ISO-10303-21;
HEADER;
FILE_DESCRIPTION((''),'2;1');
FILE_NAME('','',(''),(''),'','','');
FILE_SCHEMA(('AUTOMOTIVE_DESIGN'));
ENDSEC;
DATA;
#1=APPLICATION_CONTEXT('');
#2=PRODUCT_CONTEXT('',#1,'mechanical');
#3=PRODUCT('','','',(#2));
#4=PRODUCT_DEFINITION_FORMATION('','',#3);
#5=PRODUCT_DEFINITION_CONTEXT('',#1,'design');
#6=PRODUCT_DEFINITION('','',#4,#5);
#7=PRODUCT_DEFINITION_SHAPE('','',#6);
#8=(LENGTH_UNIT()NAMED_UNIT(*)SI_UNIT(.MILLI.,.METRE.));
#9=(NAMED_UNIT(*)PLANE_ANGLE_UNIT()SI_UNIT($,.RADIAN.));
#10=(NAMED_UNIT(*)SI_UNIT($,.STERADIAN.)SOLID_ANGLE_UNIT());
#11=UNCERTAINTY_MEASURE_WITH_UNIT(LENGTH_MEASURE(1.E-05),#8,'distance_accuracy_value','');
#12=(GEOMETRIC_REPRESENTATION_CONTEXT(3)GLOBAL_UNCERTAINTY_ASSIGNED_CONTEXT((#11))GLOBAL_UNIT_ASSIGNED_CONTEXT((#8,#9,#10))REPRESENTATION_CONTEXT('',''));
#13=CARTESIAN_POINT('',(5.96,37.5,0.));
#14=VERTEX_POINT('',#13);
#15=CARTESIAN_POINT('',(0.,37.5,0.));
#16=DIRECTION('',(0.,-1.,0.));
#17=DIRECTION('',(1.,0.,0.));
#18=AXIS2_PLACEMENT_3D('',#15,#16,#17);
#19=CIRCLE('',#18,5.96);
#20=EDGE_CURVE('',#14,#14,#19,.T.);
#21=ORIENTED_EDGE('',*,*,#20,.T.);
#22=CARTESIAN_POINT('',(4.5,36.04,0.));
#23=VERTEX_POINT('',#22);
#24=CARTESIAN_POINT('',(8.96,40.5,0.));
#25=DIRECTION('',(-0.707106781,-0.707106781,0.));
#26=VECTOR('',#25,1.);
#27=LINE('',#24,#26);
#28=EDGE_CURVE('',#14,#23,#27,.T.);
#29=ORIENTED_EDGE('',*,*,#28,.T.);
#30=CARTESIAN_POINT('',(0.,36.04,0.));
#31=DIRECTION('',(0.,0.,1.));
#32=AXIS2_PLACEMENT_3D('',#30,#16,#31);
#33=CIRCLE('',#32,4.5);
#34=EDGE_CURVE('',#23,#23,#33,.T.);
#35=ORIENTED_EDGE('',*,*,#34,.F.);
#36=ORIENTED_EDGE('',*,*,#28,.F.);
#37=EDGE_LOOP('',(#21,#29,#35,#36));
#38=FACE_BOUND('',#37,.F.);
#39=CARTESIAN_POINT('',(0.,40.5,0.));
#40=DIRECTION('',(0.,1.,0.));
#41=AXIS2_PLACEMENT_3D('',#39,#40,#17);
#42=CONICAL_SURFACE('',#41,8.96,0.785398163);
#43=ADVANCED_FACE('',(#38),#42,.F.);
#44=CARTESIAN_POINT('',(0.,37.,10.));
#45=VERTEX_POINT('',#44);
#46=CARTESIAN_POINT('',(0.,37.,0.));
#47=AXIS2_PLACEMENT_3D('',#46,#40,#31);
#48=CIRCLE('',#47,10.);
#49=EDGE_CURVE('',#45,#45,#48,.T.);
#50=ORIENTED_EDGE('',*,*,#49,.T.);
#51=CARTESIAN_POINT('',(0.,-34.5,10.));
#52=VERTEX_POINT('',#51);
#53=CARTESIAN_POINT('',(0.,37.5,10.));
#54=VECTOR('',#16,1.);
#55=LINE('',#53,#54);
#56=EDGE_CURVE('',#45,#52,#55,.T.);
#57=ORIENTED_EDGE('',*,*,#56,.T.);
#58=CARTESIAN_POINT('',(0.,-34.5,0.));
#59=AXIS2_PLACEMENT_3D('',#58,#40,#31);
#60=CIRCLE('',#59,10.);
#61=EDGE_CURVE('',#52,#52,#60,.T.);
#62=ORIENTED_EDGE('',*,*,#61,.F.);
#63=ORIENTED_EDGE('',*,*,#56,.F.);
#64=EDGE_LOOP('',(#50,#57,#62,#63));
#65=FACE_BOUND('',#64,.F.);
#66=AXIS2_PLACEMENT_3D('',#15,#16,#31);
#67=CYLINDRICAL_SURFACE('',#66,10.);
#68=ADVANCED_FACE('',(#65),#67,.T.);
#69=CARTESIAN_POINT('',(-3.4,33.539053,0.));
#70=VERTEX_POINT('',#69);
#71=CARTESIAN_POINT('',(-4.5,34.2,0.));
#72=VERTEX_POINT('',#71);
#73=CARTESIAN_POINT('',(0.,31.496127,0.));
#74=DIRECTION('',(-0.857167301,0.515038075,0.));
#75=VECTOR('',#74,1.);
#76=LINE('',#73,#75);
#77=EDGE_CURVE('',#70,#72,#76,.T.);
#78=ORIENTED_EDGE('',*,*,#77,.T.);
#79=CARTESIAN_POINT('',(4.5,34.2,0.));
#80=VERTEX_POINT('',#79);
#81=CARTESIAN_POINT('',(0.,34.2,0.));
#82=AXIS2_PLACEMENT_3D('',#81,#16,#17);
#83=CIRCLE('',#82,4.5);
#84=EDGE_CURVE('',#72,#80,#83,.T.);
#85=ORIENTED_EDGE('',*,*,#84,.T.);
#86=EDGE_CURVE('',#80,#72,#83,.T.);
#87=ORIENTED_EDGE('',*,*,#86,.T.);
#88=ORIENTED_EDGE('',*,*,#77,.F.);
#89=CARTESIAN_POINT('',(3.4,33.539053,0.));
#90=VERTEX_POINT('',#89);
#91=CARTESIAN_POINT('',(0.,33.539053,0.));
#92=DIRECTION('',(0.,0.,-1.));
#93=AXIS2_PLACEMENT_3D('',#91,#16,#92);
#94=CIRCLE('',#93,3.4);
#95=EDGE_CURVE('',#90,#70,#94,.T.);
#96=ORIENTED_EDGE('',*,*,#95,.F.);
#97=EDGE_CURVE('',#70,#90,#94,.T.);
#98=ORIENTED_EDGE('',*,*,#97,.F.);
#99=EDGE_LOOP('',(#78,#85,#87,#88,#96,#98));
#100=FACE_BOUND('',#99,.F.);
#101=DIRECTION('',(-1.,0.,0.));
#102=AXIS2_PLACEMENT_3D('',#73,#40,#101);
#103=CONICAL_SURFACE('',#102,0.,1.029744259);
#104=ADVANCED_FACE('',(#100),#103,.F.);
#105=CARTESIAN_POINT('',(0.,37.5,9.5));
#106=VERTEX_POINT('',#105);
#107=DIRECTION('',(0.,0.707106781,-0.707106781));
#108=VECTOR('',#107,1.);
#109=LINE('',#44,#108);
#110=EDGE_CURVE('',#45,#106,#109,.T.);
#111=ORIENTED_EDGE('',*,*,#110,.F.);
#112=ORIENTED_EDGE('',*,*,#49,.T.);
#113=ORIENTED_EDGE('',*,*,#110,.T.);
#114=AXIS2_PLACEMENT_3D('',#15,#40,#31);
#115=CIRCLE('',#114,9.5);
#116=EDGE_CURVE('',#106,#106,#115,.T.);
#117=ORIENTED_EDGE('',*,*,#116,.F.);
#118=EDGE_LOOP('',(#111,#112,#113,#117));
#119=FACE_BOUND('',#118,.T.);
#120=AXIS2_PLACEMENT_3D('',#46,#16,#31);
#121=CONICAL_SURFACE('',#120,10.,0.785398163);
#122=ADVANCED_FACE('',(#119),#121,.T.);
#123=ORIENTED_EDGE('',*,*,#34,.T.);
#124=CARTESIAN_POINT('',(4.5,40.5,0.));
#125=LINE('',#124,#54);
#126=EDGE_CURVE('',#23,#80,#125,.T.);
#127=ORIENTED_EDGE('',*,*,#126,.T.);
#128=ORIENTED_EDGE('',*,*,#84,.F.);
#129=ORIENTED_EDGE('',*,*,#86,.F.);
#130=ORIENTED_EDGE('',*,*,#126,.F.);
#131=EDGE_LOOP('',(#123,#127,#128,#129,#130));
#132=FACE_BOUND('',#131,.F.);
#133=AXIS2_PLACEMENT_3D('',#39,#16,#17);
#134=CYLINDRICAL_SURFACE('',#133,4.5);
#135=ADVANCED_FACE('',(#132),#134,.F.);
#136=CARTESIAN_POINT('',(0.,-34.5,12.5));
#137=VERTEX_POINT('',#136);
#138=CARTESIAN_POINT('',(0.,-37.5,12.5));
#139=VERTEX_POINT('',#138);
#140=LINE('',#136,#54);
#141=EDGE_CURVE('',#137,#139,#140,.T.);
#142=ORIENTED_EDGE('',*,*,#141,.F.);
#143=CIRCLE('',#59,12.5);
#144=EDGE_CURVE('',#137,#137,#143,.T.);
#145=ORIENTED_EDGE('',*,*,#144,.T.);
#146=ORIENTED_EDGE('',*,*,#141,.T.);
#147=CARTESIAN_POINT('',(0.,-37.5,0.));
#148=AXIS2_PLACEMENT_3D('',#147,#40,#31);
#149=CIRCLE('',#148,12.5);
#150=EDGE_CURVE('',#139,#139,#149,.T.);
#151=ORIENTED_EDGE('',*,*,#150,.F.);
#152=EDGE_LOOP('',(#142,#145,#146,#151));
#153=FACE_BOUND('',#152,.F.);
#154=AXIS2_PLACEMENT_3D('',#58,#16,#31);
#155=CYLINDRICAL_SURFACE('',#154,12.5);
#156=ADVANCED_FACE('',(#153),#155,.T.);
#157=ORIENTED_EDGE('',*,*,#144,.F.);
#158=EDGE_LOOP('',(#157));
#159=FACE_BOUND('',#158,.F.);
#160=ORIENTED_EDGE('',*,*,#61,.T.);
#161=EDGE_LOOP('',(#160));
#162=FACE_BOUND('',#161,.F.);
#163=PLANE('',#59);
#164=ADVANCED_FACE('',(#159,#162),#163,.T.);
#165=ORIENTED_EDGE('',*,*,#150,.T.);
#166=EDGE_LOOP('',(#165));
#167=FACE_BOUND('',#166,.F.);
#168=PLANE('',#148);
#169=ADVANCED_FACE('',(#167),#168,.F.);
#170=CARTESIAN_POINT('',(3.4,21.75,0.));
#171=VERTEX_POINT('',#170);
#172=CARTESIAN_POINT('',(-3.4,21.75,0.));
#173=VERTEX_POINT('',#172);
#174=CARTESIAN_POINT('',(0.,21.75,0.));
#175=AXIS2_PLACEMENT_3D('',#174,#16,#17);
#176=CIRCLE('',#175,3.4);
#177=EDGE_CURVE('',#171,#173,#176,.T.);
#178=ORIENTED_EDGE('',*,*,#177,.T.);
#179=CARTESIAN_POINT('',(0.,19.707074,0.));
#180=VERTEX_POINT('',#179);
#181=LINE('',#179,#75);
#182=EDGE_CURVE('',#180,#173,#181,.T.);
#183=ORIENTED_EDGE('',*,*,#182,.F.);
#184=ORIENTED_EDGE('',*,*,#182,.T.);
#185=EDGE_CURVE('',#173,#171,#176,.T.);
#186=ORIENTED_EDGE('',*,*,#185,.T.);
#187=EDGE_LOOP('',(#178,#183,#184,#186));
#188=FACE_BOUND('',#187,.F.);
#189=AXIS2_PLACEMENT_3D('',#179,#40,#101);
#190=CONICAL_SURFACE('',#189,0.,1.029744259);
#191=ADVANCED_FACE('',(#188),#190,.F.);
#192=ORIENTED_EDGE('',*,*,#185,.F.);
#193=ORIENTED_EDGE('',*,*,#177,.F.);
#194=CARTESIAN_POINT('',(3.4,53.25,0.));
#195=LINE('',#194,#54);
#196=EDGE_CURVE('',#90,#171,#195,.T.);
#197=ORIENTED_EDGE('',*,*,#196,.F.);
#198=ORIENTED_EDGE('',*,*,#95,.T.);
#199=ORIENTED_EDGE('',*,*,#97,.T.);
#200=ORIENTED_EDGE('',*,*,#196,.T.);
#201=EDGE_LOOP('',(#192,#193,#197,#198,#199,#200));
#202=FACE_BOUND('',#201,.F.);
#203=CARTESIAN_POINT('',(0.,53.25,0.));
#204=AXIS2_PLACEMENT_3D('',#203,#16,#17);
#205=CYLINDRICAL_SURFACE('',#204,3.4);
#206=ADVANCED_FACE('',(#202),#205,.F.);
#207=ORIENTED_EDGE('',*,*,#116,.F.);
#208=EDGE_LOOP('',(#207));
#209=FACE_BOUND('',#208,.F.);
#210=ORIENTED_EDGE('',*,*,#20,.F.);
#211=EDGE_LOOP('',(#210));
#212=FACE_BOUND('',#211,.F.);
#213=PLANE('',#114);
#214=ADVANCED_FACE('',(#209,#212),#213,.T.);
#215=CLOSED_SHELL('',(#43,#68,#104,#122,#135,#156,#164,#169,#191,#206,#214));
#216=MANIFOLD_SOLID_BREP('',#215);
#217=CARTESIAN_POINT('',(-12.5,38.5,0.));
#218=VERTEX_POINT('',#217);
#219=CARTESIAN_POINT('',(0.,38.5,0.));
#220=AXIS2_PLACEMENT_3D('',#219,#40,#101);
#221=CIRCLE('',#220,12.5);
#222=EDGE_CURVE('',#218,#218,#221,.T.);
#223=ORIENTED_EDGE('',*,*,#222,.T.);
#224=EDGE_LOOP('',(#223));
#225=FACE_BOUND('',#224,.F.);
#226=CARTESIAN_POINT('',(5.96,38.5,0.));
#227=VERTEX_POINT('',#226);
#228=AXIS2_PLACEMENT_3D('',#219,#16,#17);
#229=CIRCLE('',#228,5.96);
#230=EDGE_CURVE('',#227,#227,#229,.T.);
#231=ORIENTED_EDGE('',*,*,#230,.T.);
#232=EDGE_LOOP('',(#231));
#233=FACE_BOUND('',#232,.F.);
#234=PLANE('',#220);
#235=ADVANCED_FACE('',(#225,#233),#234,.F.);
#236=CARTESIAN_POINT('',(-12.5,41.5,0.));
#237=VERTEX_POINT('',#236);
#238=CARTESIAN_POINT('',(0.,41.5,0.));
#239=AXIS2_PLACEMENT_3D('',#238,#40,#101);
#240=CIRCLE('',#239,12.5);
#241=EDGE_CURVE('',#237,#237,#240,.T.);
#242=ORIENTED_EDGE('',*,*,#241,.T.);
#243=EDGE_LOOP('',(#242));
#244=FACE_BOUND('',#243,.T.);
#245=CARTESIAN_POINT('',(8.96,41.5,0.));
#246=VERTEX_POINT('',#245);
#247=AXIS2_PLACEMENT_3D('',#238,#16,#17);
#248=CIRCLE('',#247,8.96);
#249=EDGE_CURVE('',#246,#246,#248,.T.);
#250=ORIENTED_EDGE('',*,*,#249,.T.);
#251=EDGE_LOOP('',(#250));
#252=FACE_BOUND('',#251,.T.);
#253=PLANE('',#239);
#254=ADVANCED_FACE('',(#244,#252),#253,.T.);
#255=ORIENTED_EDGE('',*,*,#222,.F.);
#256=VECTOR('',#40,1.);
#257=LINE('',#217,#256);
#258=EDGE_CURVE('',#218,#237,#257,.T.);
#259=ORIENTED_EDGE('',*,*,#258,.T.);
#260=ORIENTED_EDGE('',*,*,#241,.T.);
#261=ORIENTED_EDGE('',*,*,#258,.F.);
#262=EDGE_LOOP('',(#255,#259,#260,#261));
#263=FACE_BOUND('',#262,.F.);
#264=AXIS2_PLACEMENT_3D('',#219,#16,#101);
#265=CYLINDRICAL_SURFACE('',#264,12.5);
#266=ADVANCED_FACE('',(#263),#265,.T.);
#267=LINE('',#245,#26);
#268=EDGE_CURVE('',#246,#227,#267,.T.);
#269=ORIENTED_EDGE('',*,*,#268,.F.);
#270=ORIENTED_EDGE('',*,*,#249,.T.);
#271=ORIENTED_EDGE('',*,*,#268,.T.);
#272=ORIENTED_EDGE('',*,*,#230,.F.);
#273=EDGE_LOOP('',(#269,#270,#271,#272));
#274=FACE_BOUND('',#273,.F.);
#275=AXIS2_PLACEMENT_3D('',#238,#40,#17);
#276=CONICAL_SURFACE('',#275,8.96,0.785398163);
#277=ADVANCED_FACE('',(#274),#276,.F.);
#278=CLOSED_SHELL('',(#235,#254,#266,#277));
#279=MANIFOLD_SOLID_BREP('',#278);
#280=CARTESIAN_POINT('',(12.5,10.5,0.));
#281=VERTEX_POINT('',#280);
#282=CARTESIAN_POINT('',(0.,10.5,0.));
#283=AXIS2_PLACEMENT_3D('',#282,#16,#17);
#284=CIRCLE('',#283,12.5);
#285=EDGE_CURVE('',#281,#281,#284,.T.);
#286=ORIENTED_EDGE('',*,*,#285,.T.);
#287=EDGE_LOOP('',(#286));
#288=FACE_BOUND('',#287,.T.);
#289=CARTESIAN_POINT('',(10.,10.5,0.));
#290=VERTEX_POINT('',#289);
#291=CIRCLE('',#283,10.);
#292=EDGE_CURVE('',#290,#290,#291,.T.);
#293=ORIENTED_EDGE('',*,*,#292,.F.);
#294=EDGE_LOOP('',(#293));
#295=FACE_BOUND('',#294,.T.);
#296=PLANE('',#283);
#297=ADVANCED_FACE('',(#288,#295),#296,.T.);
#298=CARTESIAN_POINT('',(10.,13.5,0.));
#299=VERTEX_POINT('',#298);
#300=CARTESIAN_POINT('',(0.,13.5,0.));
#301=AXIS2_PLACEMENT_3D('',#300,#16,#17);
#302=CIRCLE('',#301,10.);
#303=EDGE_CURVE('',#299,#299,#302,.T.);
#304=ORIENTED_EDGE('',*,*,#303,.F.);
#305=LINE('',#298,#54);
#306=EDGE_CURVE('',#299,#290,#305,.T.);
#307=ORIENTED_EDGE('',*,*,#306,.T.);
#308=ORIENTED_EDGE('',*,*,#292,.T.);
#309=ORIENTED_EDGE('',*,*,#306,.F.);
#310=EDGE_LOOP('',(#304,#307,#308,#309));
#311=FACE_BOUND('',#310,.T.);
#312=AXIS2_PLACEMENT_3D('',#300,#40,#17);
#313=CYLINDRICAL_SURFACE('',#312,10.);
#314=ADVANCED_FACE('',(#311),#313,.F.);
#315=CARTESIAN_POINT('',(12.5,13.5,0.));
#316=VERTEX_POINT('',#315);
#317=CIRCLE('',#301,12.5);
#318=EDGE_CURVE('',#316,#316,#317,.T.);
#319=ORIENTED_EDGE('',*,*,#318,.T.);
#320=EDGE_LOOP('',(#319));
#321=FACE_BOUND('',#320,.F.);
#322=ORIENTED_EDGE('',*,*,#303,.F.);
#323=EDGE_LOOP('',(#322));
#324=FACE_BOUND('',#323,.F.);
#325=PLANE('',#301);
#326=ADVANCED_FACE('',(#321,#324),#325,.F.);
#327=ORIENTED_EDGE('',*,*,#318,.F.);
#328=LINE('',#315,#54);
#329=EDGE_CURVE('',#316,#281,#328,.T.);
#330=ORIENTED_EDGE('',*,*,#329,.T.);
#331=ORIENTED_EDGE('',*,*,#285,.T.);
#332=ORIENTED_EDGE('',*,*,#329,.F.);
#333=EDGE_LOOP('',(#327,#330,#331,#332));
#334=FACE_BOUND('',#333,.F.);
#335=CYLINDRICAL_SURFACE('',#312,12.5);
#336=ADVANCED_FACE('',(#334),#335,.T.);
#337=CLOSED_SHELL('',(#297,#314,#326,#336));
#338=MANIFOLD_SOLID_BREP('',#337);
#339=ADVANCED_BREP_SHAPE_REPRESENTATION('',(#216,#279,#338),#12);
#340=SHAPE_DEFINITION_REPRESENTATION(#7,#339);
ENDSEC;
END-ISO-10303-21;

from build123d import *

# Parameters (mm, degrees)
F4_D            = 9
F4_DEPTH        = 6.3
F4_CSINK_D      = 17.92
F4_CSINK_ANGLE  = 90
F4_TIP          = 2.7038727856
F6_D            = 6.8
F6_DEPTH        = 15.75
F6_TIP          = 2.0429261047
F8_R            = 12.5
F9_DEPTH        = 3
F11_D           = 6.8
F11_DEPTH       = 15.75
F11_CSINK_D     = 17.92
F11_CSINK_ANGLE = 90
F11_TIP         = 2.0429261047
F12_SIZE        = 0.5
F14_R           = 12.5
F14_R_2         = 10
F15_DEPTH       = 3


with BuildPart() as f1:
    # F0 (on Right) → F1 (revolve)
    with BuildSketch(Plane.YZ):
        Polygon((-37.5, 12.5), (-37.5, 0), (37.5, 0), (37.5, 10), (-34.5, 10), (-34.5, 12.5), align=None)
    revolve(axis=Axis((0, 0, 0), (0, 1, 0)))

    # F4
    with Locations(Plane(origin=(0, 40.5, 0), x_dir=(-1, 0, 0), z_dir=(0, 1, 0))):
        with Locations((0, 0)):
            CounterSinkHole(F4_D / 2, F4_CSINK_D / 2, depth=F4_DEPTH, counter_sink_angle=F4_CSINK_ANGLE)
            with Locations((0, 0, -(F4_DEPTH + F4_TIP / 2))):  # 118° drill point
                Cone(0, F4_D / 2, F4_TIP, mode=Mode.SUBTRACT)

    # F6
    with Locations(Plane(origin=(0, 37.5, 0), x_dir=(-1, 0, 0), z_dir=(0, 1, 0))):
        with Locations((0, 0)):
            Hole(F6_D / 2, depth=F6_DEPTH)
            with Locations((0, 0, -(F6_DEPTH + F6_TIP / 2))):  # 118° drill point
                Cone(0, F6_D / 2, F6_TIP, mode=Mode.SUBTRACT)

    # F12
    f12_edges = [f1.edges().sort_by_distance(p)[0] for p in [
        (0, 37.5, -10),
    ]]
    chamfer(f12_edges, length=F12_SIZE)


with BuildPart() as f9:
    # F8 (on offset) → F9 (new body)
    with BuildSketch(Plane(origin=(0, 38.5, 0), x_dir=(-1, 0, 0), z_dir=(0, 1, 0))):
        Circle(F8_R)
    extrude(amount=F9_DEPTH)

    # F11
    with Locations(Plane(origin=(0, 41.5, 0), x_dir=(-1, 0, 0), z_dir=(0, 1, 0))):
        with Locations((0, 0)):
            CounterSinkHole(F11_D / 2, F11_CSINK_D / 2, depth=F11_DEPTH, counter_sink_angle=F11_CSINK_ANGLE)
            with Locations((0, 0, -(F11_DEPTH + F11_TIP / 2))):  # 118° drill point
                Cone(0, F11_D / 2, F11_TIP, mode=Mode.SUBTRACT)


with BuildPart() as f15:
    # F14 (on offset) → F15 (new body)
    with BuildSketch(Plane.XZ.offset(-13.5)):
        Circle(F14_R)
        Circle(F14_R_2, mode=Mode.SUBTRACT)
    extrude(amount=F15_DEPTH)


solid = Compound([f1.part, f9.part, f15.part])
